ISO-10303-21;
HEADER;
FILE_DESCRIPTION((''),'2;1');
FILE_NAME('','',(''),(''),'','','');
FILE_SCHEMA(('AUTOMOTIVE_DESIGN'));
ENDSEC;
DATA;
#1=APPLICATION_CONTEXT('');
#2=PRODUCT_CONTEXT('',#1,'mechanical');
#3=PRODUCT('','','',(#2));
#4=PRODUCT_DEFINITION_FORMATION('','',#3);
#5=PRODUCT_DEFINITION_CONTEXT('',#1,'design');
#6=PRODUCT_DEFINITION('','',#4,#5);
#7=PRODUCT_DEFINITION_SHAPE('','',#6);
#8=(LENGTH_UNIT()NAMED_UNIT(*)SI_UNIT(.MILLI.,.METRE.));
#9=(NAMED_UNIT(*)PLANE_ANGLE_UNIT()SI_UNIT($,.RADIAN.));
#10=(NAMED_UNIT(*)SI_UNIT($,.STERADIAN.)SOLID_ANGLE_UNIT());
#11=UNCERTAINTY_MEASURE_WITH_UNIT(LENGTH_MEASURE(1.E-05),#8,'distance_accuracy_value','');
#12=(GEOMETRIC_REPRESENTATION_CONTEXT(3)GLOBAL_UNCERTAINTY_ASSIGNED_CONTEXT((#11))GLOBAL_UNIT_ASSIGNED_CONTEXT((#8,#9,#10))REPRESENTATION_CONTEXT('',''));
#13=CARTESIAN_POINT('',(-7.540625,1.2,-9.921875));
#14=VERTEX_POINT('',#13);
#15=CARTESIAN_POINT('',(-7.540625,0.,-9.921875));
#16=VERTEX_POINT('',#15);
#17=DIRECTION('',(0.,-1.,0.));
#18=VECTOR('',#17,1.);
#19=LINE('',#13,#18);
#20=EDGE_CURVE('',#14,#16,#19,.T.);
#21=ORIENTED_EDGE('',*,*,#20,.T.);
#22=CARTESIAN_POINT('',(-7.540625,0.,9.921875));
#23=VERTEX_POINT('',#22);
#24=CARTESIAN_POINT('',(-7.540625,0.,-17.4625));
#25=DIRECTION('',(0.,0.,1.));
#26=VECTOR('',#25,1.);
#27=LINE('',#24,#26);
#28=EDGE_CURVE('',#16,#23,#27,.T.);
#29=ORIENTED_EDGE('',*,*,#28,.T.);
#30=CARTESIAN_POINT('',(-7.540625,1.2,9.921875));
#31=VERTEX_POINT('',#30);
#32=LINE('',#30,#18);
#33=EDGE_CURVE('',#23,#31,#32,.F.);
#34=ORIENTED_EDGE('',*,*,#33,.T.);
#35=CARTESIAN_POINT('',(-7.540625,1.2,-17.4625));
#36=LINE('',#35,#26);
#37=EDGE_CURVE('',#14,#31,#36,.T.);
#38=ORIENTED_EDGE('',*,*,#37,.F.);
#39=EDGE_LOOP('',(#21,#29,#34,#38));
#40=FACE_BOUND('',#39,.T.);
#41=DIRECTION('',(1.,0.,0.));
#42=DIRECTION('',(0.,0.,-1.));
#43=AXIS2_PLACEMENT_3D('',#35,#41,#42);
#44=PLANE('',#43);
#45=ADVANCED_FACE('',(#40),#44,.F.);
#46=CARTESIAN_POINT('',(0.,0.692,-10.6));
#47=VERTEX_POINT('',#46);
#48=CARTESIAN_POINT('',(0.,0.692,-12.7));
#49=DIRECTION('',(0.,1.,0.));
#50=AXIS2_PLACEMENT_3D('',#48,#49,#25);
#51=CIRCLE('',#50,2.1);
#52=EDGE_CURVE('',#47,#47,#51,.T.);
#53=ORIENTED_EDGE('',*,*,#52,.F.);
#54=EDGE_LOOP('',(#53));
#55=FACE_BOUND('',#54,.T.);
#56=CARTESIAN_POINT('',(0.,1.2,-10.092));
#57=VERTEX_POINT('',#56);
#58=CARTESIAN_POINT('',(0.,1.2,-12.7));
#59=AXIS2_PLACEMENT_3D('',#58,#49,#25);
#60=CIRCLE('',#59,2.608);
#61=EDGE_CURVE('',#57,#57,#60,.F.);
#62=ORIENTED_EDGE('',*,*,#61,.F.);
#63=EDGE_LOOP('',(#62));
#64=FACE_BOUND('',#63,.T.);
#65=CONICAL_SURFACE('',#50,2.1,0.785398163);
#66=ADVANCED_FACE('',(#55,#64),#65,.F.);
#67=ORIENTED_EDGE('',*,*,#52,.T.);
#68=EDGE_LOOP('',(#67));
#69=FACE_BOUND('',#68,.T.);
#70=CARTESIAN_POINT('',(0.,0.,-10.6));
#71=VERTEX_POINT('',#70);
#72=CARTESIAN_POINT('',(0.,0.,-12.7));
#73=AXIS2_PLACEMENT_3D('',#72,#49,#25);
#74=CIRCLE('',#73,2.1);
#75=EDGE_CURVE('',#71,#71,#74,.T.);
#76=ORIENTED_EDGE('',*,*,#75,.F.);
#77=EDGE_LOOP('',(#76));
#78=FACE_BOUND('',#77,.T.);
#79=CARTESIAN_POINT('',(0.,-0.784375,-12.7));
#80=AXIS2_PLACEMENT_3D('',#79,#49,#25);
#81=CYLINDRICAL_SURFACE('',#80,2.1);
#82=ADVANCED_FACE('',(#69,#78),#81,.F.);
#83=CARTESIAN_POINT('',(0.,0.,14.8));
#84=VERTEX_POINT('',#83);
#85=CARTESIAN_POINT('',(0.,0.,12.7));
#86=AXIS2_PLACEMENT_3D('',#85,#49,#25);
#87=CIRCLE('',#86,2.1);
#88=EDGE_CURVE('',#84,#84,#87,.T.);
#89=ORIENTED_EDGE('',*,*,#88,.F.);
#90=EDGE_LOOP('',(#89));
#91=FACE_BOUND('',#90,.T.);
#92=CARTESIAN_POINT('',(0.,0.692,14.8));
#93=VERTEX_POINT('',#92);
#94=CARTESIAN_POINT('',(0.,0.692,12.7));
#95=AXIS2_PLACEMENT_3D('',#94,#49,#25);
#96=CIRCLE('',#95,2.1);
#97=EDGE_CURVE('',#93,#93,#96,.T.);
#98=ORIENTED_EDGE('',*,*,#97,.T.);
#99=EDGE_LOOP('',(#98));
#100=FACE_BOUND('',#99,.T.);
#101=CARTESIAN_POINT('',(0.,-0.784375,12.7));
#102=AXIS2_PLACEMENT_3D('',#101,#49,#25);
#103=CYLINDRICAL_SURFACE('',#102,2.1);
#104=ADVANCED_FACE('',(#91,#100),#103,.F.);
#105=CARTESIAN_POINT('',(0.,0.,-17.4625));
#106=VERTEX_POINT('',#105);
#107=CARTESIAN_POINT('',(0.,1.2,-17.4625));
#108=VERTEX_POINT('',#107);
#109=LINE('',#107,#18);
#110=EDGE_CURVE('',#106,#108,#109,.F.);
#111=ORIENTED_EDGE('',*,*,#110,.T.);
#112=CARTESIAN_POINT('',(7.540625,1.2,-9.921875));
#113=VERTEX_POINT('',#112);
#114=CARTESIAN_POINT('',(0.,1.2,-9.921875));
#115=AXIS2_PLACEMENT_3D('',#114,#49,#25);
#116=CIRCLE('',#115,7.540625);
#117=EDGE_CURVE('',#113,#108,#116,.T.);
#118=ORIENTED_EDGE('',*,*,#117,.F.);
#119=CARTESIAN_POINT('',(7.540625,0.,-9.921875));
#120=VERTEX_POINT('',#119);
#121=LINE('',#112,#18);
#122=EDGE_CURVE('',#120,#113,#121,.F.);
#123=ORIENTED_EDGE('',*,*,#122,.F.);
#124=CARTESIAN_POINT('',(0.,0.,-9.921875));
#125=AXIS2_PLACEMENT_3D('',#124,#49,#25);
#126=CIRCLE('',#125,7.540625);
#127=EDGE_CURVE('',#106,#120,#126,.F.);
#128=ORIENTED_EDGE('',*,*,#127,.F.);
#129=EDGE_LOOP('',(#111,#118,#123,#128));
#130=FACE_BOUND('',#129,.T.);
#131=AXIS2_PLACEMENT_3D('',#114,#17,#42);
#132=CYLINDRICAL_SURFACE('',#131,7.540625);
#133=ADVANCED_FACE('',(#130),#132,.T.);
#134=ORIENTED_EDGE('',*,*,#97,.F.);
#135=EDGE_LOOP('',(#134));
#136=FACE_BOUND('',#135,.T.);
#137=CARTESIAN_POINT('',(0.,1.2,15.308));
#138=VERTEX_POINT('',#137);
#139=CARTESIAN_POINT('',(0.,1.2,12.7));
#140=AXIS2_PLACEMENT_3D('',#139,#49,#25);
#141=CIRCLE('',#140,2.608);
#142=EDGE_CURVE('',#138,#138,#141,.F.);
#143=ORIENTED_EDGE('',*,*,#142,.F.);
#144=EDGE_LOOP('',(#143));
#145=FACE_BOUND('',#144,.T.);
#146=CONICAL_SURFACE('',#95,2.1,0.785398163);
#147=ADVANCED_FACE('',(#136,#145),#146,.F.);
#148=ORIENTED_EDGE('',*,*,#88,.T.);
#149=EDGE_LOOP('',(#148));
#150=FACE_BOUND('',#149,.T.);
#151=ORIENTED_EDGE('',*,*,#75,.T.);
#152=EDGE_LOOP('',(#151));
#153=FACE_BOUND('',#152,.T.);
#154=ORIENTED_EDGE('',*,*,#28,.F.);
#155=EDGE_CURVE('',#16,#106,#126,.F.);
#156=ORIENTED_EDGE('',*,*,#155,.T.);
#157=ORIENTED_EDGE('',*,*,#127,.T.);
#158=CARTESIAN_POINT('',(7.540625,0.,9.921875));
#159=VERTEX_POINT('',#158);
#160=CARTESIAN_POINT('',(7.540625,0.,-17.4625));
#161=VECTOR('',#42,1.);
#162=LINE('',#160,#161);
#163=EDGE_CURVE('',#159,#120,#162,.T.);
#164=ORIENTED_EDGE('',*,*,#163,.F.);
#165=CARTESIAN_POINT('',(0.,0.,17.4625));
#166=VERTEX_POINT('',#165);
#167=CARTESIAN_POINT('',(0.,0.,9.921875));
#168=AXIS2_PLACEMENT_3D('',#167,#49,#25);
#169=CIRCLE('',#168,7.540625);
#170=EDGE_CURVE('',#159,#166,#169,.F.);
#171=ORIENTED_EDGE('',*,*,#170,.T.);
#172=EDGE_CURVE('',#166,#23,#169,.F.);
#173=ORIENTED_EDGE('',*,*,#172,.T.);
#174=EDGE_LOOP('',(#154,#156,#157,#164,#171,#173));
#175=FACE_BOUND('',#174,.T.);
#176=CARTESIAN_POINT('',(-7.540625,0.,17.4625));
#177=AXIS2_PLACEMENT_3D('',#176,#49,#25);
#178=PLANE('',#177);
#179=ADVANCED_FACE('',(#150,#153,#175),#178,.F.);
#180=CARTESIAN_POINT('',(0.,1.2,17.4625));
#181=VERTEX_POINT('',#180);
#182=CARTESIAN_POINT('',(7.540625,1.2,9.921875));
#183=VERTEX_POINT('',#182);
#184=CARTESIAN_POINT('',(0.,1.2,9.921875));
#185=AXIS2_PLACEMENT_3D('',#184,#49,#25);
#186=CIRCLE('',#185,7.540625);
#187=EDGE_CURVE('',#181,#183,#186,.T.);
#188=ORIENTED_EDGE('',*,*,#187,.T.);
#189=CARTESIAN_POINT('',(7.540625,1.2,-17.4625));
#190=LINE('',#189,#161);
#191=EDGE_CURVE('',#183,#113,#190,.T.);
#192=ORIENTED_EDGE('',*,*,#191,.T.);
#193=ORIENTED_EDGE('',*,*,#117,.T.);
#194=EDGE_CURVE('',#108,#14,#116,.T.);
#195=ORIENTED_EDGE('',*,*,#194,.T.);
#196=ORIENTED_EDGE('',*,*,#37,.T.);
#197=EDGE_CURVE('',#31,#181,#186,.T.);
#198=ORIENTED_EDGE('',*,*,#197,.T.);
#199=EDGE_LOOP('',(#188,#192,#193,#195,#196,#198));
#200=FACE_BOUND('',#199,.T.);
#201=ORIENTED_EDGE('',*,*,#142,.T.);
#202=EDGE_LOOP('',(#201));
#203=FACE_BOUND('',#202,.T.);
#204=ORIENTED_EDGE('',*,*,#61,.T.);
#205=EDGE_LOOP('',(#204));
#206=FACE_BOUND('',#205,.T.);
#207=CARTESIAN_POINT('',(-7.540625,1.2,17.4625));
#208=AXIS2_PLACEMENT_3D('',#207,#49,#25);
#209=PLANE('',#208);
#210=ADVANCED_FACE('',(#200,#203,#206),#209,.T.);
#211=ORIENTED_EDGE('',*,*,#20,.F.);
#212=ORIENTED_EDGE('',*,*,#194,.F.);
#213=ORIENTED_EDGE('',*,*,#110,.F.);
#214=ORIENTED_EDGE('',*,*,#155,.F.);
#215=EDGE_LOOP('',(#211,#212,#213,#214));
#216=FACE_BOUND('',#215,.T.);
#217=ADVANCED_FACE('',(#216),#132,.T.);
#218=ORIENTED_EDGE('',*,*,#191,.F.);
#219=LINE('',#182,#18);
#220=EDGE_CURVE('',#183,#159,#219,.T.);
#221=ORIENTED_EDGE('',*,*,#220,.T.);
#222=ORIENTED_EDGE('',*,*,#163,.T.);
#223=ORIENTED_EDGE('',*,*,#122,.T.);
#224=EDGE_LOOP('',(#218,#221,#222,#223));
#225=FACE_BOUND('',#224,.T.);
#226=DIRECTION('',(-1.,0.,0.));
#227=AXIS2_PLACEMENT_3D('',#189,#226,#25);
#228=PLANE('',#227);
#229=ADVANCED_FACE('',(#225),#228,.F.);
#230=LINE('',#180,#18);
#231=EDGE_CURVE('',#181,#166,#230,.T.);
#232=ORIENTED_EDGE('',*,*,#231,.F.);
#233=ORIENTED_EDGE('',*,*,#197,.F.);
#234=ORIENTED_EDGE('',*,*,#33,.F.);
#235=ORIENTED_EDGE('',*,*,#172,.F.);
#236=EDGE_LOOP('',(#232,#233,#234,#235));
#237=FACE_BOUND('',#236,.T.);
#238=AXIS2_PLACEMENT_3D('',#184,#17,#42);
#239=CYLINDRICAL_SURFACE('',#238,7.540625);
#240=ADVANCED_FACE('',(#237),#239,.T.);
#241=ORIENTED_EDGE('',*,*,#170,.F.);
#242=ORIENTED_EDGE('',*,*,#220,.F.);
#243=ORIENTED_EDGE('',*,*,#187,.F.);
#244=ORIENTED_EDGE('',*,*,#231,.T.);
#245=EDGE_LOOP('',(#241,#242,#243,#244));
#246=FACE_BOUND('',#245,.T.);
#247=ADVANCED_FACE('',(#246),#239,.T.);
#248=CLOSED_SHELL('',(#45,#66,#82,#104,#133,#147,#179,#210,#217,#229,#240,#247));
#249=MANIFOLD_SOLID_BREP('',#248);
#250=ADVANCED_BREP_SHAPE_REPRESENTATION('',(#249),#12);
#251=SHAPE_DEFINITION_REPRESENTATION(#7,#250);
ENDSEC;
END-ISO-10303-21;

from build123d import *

# Parameters (mm, degrees)
SKETCH1_W      = 15.08125
SKETCH1_H      = 34.925
EXTRUDE1_DEPTH = 1.2
SKETCH3_R      = 2.1
EXTRUDE2_DEPTH = 1.984375
CHAMFER1_SIZE  = 0.508
FILLET1_R      = 7.540625
FILLET2_R      = 7.540625


with BuildPart() as part:
    # Sketch1 → Extrude1 (new body)
    with BuildSketch(Plane(origin=(0, 0, 0), x_dir=(1, 0, 0), z_dir=(0, 1, 0))):
        Rectangle(SKETCH1_W, SKETCH1_H)
    extrude(amount=EXTRUDE1_DEPTH)

    # Sketch3 → Extrude2 (cut)
    with BuildSketch(Plane(origin=(0, 1.2, 0), x_dir=(1, 0, 0), z_dir=(0, 1, 0))):
        with Locations(Location((0, 12.7, 0), (0, 0, 270))):
            Circle(SKETCH3_R)
        with Locations(Location((0, -12.7, 0), (0, 0, 270))):
            Circle(SKETCH3_R)
    extrude(amount=-EXTRUDE2_DEPTH, mode=Mode.SUBTRACT)

    # Chamfer1
    chamfer1_edges = [part.edges().sort_by_distance(p)[0] for p in [
        (0, 1.2, -14.8),
        (0, 1.2, 10.6),
    ]]
    chamfer(chamfer1_edges, length=CHAMFER1_SIZE)

    # Fillet1
    fillet1_edges = [part.edges().sort_by_distance(p)[0] for p in [
        (-7.540625, 0.6, -17.4625),
    ]]
    fillet(fillet1_edges, radius=FILLET1_R)

    # Fillet2
    fillet2_edges = [part.edges().sort_by_distance(p)[0] for p in [
        (7.540625, 0.6, 17.4625),
        (-7.540625, 0.6, 17.4625),
        (7.540625, 0.6, -17.4625),
    ]]
    fillet(fillet2_edges, radius=FILLET2_R - 0.0001)  # a hair under: the kernel refuses the full size


solid = part.part
